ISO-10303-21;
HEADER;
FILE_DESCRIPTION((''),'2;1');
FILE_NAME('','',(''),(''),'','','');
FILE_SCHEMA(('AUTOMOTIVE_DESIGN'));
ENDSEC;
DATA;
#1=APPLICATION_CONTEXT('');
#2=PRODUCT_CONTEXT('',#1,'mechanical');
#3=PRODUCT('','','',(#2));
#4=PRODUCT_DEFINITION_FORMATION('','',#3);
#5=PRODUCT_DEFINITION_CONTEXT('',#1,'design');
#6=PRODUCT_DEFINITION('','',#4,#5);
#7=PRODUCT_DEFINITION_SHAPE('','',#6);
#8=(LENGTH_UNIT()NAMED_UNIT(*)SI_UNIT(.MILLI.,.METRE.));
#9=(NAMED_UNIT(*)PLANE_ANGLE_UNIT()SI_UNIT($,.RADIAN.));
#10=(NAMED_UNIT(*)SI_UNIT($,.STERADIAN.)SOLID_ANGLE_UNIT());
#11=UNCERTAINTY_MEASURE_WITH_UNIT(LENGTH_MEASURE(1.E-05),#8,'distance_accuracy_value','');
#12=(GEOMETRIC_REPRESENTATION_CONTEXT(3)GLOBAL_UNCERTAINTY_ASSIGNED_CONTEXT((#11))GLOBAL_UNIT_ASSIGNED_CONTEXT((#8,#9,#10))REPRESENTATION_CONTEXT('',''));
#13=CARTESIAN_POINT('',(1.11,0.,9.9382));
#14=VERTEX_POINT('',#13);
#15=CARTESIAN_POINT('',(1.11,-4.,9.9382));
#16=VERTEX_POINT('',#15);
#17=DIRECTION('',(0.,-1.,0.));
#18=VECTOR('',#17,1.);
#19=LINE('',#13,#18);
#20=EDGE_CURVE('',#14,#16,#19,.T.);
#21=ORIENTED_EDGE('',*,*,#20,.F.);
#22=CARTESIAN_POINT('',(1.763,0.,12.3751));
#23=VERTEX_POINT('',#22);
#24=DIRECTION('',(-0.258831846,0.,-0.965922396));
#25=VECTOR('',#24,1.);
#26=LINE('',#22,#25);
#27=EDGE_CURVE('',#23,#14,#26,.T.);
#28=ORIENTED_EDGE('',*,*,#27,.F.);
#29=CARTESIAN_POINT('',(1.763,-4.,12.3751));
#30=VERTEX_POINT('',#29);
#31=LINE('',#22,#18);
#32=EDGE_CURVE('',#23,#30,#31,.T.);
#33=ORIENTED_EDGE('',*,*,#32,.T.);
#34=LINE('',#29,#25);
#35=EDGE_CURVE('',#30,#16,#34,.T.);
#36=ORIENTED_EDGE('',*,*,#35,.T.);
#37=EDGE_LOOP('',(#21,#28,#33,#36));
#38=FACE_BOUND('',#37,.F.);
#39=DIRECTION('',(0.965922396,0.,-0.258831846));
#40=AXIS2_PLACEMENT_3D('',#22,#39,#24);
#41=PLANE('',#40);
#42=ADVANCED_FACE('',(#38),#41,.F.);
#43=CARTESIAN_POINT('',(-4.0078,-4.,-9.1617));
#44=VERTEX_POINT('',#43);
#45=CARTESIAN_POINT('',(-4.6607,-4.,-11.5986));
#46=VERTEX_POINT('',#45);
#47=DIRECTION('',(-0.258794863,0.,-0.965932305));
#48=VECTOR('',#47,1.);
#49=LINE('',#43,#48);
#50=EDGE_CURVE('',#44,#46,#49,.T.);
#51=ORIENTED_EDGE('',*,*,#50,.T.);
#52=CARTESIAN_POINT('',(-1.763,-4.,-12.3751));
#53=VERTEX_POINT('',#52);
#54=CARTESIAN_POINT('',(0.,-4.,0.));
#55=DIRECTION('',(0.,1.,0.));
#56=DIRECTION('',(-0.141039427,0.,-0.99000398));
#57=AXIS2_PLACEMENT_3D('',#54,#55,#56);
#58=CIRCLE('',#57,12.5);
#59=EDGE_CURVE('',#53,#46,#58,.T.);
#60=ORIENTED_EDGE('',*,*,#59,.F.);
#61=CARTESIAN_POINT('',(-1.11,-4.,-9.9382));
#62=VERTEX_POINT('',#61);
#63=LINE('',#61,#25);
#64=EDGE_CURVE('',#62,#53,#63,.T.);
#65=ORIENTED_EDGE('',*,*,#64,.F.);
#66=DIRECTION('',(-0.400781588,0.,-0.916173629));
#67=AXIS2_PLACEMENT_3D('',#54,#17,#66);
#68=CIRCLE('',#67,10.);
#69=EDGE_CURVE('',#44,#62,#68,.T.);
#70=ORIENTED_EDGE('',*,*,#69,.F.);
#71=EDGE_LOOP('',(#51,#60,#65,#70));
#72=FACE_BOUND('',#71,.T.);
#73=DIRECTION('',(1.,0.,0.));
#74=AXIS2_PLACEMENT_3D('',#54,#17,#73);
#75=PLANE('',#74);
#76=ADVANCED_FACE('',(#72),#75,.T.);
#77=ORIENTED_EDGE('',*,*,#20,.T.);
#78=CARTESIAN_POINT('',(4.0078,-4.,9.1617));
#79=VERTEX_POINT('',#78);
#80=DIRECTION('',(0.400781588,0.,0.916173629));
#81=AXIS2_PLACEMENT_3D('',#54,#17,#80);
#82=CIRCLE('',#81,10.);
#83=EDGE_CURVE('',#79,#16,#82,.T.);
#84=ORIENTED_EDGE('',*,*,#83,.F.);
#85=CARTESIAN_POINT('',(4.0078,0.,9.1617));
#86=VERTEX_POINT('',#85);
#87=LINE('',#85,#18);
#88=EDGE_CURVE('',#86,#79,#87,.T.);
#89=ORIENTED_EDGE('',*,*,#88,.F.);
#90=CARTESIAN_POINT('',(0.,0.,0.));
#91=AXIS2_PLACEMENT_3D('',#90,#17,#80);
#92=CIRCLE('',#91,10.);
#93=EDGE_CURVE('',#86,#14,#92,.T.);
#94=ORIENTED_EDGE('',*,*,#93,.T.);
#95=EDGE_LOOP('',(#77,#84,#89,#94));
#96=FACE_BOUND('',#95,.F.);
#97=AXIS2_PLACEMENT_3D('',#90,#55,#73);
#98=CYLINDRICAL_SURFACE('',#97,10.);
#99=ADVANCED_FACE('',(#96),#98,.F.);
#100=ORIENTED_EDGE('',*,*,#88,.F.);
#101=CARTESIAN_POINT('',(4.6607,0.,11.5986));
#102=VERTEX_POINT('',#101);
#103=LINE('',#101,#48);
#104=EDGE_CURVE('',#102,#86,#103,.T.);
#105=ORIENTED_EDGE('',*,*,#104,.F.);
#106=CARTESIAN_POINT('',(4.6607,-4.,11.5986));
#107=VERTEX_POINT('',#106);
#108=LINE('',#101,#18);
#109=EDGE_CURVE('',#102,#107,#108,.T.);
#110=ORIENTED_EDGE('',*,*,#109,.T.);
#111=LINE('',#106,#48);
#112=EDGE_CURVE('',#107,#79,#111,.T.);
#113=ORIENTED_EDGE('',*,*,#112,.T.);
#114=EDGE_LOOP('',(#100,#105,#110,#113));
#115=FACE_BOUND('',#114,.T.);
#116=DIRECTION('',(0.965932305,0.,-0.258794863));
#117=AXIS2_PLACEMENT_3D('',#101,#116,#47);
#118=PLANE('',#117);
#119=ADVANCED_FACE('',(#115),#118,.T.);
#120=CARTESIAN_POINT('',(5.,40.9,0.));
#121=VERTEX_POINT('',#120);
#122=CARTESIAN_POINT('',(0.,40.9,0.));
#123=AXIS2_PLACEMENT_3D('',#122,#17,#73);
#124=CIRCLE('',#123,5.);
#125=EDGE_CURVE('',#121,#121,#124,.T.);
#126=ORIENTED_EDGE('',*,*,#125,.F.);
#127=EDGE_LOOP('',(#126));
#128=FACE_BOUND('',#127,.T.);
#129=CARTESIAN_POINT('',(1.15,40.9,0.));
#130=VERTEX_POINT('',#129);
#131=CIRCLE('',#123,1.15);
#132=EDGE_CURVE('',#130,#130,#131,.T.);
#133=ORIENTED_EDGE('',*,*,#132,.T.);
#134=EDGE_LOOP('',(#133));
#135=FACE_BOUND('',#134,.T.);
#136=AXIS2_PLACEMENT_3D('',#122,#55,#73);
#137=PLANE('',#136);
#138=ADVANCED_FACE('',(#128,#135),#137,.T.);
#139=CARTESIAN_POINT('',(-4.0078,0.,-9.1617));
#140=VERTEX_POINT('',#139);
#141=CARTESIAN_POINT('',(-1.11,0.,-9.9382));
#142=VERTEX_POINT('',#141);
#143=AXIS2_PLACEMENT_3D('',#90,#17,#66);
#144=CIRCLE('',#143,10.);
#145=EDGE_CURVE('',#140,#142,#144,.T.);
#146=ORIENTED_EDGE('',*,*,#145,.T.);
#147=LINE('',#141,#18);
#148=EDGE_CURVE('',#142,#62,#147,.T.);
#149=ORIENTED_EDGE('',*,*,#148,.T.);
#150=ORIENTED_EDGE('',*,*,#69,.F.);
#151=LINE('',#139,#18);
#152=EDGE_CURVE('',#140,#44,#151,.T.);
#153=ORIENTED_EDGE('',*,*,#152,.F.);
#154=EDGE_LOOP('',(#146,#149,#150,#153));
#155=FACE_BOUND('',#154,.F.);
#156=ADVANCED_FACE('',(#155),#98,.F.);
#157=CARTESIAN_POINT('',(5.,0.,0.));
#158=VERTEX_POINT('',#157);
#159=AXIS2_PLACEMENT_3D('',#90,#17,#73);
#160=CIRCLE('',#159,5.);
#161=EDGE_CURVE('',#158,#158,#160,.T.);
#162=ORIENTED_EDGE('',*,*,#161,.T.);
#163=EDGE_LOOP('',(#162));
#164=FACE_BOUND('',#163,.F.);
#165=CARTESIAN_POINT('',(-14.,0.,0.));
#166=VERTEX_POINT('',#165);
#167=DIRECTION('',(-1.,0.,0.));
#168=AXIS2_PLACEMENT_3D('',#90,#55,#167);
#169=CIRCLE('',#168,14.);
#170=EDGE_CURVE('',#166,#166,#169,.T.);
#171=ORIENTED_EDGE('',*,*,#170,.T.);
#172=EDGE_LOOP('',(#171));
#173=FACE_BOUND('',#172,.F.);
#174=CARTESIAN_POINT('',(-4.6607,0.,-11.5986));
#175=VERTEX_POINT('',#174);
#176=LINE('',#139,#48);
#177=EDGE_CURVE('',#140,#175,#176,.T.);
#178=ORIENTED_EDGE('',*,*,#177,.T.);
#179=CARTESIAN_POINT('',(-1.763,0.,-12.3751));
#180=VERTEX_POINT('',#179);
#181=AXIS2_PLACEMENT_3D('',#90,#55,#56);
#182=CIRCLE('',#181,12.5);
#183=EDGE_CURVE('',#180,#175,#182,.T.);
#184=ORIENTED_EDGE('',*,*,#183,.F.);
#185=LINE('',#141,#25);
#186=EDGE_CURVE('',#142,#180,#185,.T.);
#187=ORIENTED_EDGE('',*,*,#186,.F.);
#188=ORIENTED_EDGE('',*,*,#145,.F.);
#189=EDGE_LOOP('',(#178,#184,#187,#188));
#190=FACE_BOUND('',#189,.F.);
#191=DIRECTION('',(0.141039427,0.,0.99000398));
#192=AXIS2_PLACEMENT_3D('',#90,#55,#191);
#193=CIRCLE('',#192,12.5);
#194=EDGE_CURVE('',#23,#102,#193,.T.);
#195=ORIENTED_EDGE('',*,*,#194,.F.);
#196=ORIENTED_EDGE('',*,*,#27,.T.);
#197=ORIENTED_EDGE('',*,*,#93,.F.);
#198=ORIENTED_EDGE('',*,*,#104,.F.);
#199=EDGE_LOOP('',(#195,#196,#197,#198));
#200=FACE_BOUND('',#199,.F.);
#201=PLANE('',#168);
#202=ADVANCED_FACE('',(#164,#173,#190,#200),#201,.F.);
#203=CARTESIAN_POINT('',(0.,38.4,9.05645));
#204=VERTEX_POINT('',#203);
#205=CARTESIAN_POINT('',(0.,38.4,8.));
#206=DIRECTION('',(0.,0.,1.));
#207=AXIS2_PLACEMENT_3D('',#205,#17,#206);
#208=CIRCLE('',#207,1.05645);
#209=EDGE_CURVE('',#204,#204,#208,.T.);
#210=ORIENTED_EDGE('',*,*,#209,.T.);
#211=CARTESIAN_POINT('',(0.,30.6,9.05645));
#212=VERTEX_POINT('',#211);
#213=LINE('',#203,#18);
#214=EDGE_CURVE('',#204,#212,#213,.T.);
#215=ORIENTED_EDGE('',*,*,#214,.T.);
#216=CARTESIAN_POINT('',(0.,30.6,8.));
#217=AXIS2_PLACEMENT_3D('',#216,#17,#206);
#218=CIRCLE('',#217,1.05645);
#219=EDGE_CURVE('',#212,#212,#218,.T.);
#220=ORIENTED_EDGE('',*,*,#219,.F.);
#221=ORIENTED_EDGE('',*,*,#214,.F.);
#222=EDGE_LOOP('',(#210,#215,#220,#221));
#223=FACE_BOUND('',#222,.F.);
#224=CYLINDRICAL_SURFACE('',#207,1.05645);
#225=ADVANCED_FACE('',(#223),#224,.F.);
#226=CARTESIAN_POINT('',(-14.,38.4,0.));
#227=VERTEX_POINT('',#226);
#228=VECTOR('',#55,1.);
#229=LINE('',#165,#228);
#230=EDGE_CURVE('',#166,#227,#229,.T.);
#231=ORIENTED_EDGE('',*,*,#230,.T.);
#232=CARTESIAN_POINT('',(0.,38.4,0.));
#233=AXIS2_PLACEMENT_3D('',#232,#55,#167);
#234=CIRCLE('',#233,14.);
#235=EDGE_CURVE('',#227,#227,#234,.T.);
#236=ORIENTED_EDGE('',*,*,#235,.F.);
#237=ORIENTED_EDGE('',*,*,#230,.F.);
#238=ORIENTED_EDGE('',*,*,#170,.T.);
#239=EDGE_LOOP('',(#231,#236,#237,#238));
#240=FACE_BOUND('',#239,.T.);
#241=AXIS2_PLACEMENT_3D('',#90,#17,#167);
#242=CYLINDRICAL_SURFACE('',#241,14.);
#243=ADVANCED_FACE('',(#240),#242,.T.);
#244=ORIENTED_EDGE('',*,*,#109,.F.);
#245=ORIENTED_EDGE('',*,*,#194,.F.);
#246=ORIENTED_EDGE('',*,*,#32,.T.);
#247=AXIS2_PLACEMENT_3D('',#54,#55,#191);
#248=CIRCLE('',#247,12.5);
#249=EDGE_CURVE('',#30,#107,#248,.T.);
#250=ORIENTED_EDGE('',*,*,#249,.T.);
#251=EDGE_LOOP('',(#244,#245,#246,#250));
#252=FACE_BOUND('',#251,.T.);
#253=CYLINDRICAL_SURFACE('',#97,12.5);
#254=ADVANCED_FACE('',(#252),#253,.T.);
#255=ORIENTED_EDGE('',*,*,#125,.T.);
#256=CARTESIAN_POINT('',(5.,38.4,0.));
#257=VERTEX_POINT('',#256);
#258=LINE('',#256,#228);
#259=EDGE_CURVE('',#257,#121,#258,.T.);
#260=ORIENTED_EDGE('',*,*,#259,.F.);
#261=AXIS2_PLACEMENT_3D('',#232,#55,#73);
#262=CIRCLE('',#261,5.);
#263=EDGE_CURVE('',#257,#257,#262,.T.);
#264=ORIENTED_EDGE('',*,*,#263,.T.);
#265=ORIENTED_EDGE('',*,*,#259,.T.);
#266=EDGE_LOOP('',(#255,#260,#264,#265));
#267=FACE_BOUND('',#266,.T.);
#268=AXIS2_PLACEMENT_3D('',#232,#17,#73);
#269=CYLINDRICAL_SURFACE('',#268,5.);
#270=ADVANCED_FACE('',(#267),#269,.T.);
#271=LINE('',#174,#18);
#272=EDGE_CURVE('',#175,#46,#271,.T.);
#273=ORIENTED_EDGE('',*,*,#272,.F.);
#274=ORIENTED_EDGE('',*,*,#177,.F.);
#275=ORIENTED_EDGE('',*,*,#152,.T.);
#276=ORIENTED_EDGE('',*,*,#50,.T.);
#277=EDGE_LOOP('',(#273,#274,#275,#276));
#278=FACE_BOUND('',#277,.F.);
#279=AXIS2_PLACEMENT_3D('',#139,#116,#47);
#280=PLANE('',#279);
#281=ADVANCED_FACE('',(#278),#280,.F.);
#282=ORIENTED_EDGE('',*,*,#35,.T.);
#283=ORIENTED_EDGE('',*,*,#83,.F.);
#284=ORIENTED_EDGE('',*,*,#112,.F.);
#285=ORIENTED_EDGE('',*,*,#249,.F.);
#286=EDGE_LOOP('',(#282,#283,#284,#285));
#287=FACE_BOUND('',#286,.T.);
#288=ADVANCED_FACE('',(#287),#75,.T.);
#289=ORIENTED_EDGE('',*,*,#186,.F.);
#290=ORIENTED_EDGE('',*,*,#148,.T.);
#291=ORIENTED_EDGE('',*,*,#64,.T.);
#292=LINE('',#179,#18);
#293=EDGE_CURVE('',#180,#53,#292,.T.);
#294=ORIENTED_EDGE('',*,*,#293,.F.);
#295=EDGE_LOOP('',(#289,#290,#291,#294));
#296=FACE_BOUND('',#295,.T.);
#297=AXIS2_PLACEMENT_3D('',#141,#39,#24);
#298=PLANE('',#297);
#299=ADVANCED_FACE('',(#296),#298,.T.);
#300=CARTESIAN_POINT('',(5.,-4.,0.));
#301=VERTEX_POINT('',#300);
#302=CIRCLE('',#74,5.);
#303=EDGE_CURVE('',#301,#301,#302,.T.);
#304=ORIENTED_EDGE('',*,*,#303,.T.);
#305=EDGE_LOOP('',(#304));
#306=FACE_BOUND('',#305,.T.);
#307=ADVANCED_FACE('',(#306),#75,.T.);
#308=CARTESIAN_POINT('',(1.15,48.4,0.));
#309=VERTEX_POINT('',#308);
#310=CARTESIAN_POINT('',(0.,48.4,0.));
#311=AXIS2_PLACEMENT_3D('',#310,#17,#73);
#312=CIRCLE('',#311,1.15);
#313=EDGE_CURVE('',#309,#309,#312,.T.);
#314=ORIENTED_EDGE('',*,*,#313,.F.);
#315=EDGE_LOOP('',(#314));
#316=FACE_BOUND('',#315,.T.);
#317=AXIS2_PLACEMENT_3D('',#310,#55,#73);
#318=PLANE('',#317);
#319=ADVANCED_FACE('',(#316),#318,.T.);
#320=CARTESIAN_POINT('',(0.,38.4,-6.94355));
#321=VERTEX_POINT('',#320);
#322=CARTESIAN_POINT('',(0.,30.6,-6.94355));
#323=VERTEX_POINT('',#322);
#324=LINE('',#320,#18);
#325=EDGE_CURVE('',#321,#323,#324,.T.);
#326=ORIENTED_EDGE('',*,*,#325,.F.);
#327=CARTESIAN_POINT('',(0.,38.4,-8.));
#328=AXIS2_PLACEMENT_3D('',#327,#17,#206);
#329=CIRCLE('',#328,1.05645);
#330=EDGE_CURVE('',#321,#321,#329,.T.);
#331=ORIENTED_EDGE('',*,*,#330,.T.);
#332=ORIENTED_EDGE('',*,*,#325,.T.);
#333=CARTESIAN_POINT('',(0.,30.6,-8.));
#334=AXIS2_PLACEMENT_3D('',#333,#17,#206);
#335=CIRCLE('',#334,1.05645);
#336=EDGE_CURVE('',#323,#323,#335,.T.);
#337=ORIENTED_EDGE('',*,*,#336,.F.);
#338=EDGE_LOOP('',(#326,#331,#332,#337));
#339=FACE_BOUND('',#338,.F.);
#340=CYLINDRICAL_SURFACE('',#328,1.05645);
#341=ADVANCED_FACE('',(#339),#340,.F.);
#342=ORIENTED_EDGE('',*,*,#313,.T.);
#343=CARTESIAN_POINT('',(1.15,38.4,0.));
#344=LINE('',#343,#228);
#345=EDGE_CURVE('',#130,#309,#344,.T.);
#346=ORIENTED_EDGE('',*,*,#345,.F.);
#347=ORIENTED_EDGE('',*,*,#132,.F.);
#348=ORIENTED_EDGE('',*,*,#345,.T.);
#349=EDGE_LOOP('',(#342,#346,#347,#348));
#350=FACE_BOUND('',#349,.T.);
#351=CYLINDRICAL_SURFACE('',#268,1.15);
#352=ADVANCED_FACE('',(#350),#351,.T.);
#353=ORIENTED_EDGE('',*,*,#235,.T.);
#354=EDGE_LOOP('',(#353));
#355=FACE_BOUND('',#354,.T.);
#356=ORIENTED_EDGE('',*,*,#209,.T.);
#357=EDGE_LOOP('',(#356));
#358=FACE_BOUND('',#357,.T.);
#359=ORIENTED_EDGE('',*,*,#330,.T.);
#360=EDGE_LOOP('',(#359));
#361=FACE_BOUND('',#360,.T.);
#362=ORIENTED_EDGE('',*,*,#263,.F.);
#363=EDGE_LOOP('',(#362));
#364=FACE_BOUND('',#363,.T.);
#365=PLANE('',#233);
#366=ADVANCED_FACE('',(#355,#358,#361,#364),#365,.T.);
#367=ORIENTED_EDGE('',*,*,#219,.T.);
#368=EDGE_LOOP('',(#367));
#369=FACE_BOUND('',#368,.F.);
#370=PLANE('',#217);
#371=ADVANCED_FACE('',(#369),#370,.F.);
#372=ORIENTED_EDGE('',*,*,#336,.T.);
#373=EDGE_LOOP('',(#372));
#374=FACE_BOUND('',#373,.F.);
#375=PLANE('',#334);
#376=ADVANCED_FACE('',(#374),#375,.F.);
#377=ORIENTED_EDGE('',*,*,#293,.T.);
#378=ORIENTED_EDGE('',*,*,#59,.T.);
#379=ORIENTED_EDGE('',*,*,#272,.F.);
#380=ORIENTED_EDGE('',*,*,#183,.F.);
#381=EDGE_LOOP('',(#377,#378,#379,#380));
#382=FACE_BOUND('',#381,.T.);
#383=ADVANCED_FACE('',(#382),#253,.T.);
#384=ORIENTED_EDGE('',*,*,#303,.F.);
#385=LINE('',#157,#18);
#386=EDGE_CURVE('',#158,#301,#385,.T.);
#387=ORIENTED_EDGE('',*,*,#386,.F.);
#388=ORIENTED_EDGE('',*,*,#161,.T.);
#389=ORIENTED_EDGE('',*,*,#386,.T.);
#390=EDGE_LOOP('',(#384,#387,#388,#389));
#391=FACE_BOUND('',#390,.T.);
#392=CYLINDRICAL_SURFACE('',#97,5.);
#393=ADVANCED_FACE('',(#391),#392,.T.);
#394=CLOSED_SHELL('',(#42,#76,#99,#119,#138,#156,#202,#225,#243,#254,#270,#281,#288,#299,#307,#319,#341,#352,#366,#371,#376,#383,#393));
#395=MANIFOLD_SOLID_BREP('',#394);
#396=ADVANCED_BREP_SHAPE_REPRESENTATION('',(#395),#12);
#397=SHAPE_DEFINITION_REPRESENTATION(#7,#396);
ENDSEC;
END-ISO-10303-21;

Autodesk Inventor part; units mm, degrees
ref_plane "YZ Plane" through (0, 0, 0) normal (1, 0, 0) x (0, 1, 0)
ref_plane "XZ Plane" through (0, 0, 0) normal (0, 1, 0) x (-1, 0, 0)
ref_plane "XY Plane" through (0, 0, 0) normal (0, 0, 1) x (1, 0, 0)
sketch "Sketch1" plane through (0, 0, 0) normal (0, 1, 0) x (-1, 0, 0)
  circle A0 centre (0, 0) radius 14
  dimension "d0" = 28
extrude "Extrusion1" add sketch "Sketch1" along normal blind 38.4
sketch "Sketch2" plane through (0, 38.4, 0) normal (0, 1, 0) x (1, 0, 0)
  circle A0 centre (0, 0) radius 5
  circle A1 centre (0, 0) radius 1.15
  circle A2 centre (0, 0) radius 8
  line L0 (0, -8) -> (0, 8)
  dimension "d3" = 10
  dimension "d6" = 2.3
  dimension "d9" = 16
extrude "Extrusion2" add sketch "Sketch2" along normal blind 2.5 contours A0 L0 A1 | L0 A1 A0 | L0 A1 | A1 L0
extrude "Extrusion3" add sketch "Sketch2" along normal blind 10 contours L0 A1 | A1 L0
hole "Hole1" at (0, 38.4, 8) at (0, 38.4, -8) direction (0, -1, 0) diameter 2.1129 depth 7.8 thread size "M2.6x0.45" class "6H" standard "ISO Metric profile"
sketch "Sketch3" plane through (0, 0, 0) normal (0, -1, 0) x (1, 0, 0)
  circle A0 centre (0, 0) radius 5
  dimension "d17" = 10
extrude "Extrusion4" add sketch "Sketch3" along normal blind 4
sketch "Sketch4" plane through (0, 0, 0) normal (0, -1, 0) x (1, 0, 0)
  line L0 (-12.0122, 7.6623) -> (12.8258, 7.6623) construction
  line L1 (12.8258, 7.6623) -> (12.8258, -7.5309) construction
  line L2 (12.8258, -7.5309) -> (-12.0122, -7.5309) construction
  line L3 (-12.0122, -7.5309) -> (-12.0122, 7.6623) construction
  point P0 (0, 0)
sketch "Sketch5" plane through (0, 0, 0) normal (0, -1, 0) x (1, 0, 0)
  circle A0 centre (0, 8) radius 1.0564 projected
  circle A1 centre (0, -8) radius 1.0564 projected
  circle A2 centre (0, 0) radius 5 projected
  circle A3 centre (0, 0) radius 14 projected
  circle A4 centre (0, 0) radius 1.15 projected
  circle A5 centre (0, 0) radius 12.5
  circle A6 centre (0, 0) radius 10
  line L0 (4.6607, 11.5986) -> (4.0078, 9.1617)
  line L1 (1.763, 12.3751) -> (1.11, 9.9382)
  line L2 (-1.11, -9.9382) -> (-1.763, -12.3751)
  line L3 (-4.0078, -9.1617) -> (-4.6607, -11.5986)
  line L4 (3.6235, 13.523) -> (-3.6235, -13.523)
  line L5 (0, 14) -> (0, -14) construction
  circle A7 centre (0, 0) radius 14 projected
  dimension "d21" = 2.5
  dimension "d27" = 20
  dimension "d28" = 1.5
  dimension "d29" = 15
  dimension "d30" = 1.5
  dimension "d31" = 1.5
  dimension "d32" = 1.5
  dimension "d33" = 1.5
extrude "Extrusion5" add sketch "Sketch5" along normal up to surface (4 mm away) contours L4 A5 L0 A6 | A6 L1 A5 L4 | L4 A5 L3 A6 | A6 L2 A5 L4
equation "\"d31\" = d30"
equation "\"d32\" = d30"
properties part number "rs385"
